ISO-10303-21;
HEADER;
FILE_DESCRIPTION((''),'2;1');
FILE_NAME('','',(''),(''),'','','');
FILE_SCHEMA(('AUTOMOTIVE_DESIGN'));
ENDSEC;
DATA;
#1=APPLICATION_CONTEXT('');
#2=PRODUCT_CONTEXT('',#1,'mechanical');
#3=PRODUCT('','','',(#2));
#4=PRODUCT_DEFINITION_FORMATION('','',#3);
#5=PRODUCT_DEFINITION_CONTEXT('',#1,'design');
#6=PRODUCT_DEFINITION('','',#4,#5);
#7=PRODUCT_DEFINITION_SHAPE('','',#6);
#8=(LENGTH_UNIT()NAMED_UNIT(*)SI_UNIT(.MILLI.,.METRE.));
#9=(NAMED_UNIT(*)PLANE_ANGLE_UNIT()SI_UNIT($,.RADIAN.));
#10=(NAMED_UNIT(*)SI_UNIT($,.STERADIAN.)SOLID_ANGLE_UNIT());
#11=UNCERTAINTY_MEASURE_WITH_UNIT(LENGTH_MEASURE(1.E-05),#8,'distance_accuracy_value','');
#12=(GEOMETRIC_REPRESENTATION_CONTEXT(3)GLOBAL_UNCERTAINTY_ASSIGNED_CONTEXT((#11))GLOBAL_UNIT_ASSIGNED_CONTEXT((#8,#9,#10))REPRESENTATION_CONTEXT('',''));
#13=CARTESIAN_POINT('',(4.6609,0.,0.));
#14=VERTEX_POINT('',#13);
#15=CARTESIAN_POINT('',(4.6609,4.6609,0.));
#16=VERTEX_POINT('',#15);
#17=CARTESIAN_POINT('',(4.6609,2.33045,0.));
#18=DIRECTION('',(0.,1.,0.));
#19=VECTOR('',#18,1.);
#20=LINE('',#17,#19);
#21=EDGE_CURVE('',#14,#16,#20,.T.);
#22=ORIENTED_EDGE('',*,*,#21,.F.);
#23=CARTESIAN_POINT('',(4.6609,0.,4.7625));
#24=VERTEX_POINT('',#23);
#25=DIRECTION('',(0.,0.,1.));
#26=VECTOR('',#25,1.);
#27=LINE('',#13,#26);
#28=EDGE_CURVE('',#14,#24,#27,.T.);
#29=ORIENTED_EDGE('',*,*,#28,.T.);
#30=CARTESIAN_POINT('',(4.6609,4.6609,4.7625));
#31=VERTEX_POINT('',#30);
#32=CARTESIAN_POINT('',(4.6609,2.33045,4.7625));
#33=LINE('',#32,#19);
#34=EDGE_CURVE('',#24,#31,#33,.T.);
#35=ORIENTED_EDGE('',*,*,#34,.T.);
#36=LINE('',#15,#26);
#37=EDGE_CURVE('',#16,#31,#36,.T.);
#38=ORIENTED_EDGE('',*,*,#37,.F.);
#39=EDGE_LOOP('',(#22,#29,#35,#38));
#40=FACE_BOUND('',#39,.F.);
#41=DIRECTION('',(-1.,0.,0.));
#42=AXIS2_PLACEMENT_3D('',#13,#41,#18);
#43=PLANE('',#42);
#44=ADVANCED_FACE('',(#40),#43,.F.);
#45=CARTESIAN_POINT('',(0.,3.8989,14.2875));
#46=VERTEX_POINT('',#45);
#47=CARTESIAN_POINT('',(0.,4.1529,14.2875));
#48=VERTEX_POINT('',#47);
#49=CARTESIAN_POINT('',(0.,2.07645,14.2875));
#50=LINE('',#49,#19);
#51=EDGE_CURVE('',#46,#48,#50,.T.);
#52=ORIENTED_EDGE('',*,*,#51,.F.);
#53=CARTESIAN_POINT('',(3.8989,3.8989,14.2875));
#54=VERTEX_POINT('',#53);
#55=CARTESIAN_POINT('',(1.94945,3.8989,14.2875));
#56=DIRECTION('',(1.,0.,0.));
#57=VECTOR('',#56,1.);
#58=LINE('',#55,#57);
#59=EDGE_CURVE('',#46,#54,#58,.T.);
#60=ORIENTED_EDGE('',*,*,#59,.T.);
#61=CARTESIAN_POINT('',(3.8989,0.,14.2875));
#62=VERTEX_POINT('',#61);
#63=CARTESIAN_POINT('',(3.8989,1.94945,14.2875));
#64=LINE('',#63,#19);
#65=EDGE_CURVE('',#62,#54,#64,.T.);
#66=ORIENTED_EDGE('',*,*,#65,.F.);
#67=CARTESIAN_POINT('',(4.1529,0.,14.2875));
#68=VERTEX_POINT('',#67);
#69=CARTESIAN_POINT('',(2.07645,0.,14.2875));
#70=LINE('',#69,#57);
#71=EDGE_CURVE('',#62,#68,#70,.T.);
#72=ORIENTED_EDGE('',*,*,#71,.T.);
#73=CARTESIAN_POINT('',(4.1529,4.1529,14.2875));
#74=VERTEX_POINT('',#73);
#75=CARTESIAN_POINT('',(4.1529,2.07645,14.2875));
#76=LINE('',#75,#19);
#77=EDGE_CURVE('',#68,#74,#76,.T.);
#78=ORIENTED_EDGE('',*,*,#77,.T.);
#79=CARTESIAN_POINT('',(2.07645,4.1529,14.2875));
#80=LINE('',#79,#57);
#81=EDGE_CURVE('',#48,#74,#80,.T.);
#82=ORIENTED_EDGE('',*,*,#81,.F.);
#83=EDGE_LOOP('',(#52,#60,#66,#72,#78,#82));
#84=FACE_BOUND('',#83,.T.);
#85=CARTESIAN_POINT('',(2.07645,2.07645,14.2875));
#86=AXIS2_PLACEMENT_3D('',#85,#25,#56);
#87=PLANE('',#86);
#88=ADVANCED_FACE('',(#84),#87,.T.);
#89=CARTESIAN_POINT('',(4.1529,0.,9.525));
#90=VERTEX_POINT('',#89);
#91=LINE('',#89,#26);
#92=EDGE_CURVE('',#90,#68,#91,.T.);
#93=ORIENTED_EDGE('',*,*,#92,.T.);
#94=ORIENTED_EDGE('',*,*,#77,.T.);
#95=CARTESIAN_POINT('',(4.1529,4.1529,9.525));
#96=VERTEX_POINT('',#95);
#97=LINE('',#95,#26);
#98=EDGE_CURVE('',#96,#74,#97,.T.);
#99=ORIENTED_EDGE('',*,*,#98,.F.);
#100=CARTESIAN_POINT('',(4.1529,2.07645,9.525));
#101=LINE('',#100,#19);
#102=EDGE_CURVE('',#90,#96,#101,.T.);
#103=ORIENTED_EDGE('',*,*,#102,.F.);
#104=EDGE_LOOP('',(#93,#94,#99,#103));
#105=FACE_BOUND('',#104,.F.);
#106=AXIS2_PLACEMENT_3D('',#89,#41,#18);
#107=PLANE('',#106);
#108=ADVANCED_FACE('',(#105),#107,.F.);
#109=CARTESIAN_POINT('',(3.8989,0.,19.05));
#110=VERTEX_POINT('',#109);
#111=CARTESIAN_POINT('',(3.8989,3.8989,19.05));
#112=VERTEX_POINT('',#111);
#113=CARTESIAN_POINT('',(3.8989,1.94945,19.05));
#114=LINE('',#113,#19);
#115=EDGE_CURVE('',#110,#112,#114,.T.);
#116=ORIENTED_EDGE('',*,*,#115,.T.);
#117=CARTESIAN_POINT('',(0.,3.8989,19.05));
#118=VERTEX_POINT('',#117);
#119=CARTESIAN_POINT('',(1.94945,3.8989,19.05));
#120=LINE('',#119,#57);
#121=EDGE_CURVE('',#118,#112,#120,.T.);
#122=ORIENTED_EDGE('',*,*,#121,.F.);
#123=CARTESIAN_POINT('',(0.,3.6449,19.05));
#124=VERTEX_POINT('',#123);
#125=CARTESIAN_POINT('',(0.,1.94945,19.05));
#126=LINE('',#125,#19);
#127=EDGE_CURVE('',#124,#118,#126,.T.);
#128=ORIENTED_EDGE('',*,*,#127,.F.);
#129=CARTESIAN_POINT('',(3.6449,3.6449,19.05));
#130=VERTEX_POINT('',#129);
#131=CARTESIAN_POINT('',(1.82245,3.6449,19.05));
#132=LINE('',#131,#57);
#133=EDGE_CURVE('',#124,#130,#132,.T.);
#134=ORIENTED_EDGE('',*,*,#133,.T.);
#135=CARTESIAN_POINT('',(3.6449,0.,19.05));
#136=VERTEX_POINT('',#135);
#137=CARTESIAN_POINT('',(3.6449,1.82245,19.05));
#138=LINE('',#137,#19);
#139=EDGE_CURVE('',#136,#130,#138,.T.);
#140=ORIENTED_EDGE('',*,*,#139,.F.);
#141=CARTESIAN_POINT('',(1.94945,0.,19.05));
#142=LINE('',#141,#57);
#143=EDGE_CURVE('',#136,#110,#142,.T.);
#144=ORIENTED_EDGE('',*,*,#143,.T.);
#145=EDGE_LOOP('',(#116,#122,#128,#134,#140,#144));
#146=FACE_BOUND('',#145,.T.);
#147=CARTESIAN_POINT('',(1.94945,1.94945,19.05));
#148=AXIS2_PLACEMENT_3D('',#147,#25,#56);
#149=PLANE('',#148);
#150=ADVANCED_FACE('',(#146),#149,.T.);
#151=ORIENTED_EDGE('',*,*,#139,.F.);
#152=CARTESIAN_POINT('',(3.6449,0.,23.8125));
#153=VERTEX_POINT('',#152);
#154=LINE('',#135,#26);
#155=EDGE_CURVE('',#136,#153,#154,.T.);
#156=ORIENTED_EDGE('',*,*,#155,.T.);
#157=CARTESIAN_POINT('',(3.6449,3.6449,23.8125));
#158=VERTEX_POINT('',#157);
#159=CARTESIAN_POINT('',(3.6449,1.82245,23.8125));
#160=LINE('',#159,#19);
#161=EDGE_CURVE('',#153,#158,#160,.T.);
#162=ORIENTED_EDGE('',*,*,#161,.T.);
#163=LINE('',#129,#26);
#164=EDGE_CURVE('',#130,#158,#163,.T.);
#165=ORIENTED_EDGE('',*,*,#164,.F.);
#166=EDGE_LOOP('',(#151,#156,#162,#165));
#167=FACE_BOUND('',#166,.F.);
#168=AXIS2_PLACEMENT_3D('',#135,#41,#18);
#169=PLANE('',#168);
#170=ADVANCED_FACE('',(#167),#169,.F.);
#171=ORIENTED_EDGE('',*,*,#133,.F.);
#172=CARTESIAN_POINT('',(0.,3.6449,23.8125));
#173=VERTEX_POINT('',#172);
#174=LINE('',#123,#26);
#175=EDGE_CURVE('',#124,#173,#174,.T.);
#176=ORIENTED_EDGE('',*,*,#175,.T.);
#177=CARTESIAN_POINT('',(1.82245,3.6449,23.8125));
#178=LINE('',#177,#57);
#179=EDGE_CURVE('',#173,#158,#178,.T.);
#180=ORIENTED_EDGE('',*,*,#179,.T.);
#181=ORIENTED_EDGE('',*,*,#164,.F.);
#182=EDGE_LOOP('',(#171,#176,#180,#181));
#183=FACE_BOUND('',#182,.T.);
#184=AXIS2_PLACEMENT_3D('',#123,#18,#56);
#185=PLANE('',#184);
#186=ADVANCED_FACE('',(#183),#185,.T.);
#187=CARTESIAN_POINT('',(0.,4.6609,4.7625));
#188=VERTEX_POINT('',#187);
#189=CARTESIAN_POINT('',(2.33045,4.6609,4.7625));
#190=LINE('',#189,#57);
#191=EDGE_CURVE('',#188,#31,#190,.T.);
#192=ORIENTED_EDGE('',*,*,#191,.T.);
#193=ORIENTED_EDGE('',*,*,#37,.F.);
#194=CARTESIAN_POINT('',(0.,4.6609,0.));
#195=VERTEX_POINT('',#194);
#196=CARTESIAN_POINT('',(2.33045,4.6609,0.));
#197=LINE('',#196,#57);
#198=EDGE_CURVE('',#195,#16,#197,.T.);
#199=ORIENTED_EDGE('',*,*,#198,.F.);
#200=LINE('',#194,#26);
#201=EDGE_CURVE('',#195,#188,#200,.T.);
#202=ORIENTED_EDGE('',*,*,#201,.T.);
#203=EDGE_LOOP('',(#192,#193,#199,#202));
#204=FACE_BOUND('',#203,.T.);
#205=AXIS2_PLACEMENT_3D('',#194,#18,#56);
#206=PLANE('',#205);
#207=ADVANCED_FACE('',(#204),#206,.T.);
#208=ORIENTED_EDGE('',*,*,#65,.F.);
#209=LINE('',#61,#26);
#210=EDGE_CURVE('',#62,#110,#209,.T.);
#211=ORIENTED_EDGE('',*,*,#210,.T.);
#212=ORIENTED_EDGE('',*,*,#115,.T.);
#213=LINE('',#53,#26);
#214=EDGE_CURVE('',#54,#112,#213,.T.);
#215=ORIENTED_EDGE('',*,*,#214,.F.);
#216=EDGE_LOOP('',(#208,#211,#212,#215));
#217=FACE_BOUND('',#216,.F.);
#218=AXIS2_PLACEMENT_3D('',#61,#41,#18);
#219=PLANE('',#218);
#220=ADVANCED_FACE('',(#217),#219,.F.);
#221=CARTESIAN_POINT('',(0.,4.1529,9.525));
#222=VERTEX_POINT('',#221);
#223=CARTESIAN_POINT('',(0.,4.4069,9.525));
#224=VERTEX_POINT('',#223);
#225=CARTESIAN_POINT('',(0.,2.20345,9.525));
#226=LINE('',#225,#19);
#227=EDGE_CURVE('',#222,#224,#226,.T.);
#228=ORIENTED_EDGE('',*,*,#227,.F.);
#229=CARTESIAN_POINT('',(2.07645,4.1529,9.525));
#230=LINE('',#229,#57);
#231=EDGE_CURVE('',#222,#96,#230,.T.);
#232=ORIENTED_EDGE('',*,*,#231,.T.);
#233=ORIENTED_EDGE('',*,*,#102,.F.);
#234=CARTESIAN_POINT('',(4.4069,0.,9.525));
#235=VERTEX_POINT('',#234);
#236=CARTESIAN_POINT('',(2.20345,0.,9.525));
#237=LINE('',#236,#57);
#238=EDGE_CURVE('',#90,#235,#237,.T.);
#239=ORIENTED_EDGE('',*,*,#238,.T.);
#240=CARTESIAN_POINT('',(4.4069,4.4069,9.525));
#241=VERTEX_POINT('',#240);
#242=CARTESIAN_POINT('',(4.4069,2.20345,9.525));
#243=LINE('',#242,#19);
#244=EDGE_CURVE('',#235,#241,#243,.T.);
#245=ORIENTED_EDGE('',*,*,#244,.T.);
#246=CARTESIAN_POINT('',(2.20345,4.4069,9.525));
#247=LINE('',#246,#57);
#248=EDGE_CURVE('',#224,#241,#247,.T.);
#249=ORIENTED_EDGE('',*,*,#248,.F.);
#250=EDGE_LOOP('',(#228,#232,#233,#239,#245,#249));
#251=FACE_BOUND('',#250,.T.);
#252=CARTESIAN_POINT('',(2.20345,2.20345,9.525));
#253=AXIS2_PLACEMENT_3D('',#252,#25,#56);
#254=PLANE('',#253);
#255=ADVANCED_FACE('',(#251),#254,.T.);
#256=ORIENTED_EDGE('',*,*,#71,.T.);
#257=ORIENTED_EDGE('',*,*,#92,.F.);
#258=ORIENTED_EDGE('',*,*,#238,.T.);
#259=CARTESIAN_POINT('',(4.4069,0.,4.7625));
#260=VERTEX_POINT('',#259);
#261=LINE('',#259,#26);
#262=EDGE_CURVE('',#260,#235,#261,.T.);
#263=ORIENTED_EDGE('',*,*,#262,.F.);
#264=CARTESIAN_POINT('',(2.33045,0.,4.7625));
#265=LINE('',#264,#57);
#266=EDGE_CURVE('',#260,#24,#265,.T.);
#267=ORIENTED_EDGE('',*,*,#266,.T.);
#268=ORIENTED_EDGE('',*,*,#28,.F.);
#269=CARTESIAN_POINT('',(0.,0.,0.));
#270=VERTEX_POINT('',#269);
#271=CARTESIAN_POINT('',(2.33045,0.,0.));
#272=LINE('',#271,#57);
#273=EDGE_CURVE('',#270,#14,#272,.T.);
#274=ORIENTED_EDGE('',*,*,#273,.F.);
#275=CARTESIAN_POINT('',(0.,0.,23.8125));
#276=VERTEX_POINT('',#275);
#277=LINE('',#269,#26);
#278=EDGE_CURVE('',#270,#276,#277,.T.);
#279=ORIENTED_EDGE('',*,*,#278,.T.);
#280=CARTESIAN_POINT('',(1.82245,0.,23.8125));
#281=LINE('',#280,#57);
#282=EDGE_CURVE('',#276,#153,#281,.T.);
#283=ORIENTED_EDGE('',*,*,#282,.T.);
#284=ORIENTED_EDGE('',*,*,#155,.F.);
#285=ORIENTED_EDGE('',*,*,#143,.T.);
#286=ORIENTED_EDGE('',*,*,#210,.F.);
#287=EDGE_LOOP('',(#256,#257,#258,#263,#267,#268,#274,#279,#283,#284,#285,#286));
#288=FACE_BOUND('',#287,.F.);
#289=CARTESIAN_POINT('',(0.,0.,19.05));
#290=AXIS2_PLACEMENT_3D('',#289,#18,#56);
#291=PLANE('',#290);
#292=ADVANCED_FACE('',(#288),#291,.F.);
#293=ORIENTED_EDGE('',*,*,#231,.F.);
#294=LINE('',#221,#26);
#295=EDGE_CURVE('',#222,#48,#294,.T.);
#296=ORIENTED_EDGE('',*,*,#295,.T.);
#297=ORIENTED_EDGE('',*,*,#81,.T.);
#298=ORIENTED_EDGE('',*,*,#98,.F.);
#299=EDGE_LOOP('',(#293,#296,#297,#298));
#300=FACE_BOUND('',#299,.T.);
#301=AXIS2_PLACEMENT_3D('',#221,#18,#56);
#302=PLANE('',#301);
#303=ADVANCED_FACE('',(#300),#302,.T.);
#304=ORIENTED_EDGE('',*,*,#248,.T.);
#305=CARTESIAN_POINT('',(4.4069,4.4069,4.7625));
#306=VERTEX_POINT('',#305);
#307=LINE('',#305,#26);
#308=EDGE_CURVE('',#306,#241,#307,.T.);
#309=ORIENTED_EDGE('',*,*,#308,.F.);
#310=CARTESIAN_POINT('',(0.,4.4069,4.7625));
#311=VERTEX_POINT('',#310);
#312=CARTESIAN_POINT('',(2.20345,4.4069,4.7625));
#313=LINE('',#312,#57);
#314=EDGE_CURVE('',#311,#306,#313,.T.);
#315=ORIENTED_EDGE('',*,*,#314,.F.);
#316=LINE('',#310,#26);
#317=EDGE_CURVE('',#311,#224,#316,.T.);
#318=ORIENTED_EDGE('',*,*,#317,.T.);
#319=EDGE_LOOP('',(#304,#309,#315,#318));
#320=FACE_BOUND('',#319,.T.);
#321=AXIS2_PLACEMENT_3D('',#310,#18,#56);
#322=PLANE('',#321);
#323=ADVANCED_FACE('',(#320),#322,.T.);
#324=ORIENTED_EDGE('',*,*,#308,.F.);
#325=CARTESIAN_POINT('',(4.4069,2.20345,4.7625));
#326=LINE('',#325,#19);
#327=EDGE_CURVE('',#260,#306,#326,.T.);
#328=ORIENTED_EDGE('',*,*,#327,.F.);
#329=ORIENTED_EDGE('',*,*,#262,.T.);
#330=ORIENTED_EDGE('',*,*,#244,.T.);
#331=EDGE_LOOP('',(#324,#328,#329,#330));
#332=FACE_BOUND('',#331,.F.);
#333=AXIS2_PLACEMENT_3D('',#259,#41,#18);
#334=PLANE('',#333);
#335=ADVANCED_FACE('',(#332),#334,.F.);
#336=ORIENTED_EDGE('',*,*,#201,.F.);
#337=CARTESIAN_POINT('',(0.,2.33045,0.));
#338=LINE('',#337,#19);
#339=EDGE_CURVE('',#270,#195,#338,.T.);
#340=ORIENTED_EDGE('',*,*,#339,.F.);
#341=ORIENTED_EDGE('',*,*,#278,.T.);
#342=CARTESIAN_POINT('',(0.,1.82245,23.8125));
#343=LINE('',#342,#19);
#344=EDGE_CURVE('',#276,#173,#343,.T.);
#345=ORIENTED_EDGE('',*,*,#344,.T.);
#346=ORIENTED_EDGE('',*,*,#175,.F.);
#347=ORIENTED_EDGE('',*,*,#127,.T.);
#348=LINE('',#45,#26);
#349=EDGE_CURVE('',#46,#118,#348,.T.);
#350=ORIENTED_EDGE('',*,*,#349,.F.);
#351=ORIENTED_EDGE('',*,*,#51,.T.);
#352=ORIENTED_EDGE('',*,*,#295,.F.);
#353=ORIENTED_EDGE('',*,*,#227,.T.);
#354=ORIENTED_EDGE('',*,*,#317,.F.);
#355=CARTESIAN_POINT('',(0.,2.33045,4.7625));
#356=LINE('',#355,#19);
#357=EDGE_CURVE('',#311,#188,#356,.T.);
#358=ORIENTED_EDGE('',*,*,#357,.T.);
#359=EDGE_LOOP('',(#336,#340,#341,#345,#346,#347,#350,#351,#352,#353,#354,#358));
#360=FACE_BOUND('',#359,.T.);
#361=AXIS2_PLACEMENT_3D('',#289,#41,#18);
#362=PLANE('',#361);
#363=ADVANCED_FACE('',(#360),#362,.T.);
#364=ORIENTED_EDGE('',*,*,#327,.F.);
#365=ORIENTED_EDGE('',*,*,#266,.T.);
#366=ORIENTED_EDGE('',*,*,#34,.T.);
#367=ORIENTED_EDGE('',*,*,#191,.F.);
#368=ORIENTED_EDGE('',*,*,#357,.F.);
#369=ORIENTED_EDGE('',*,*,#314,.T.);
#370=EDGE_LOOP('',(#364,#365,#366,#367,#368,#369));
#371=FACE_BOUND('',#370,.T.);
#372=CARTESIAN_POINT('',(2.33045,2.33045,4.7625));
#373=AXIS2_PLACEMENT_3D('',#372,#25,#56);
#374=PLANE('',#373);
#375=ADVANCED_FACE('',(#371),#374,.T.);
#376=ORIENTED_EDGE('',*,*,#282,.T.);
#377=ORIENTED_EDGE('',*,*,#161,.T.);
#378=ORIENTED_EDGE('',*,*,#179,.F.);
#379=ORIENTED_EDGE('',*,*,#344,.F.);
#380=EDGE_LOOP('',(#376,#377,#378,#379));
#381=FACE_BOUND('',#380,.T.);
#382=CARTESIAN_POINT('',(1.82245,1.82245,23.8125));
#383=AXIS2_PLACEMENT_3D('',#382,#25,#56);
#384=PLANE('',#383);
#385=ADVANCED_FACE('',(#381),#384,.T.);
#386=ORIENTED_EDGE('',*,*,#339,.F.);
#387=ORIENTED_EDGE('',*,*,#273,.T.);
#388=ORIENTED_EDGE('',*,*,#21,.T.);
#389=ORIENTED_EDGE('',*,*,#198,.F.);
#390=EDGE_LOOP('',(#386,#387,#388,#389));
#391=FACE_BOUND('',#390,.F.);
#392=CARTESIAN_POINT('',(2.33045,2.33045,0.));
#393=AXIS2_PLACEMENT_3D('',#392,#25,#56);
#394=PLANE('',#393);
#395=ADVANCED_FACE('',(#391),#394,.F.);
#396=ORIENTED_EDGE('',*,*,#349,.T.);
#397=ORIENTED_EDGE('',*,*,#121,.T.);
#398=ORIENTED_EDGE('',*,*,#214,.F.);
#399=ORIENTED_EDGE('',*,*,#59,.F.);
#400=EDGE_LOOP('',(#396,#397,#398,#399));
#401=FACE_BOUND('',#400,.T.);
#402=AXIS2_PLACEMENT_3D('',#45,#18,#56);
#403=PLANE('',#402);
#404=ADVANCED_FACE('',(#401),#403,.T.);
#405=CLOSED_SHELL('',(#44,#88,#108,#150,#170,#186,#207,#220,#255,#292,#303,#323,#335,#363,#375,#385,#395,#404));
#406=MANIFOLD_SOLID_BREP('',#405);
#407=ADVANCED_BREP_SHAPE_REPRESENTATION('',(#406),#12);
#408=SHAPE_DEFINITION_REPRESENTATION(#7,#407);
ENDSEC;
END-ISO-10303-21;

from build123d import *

# Parameters (mm, degrees)
F1_W      = 4.6609
F1_H      = 4.6609
F2_DEPTH  = 4.7625
F3_W      = 4.4069
F3_H      = 4.4069
F4_DEPTH  = 4.7625
F5_W      = 4.1529
F5_H      = 4.1529
F6_DEPTH  = 4.7625
F7_W      = 3.8989
F7_H      = 3.8989
F8_DEPTH  = 4.7625
F9_W      = 3.6449
F9_H      = 3.6449
F10_DEPTH = 4.7625


# Not quite as in the source:
# - a variable given as a bare number and used for a length is read in inches; the dataset says mm whatever the document's units were


with BuildPart() as f2:
    # F1 (on Top) → F2 (new body)
    with BuildSketch(Plane.XY):
        with Locations((2.33045, 2.33045)):
            Rectangle(F1_W, F1_H)
    extrude(amount=F2_DEPTH)

    # F3 (on face) → F4 (join)
    with BuildSketch(Plane.XY.offset(4.7625)):
        with Locations((2.20345, 2.20345)):
            Rectangle(F3_W, F3_H)
    extrude(amount=F4_DEPTH)

    # F5 (on face) → F6 (join)
    with BuildSketch(Plane.XY.offset(9.525)):
        with Locations((2.07645, 2.07645)):
            Rectangle(F5_W, F5_H)
    extrude(amount=F6_DEPTH)

    # F7 (on face) → F8 (join)
    with BuildSketch(Plane.XY.offset(14.2875)):
        with Locations((1.94945, 1.94945)):
            Rectangle(F7_W, F7_H)
    extrude(amount=F8_DEPTH)

    # F9 (on face) → F10 (join)
    with BuildSketch(Plane.XY.offset(19.05)):
        with Locations((1.82245, 1.82245)):
            Rectangle(F9_W, F9_H)
    extrude(amount=F10_DEPTH)


solid = f2.part
